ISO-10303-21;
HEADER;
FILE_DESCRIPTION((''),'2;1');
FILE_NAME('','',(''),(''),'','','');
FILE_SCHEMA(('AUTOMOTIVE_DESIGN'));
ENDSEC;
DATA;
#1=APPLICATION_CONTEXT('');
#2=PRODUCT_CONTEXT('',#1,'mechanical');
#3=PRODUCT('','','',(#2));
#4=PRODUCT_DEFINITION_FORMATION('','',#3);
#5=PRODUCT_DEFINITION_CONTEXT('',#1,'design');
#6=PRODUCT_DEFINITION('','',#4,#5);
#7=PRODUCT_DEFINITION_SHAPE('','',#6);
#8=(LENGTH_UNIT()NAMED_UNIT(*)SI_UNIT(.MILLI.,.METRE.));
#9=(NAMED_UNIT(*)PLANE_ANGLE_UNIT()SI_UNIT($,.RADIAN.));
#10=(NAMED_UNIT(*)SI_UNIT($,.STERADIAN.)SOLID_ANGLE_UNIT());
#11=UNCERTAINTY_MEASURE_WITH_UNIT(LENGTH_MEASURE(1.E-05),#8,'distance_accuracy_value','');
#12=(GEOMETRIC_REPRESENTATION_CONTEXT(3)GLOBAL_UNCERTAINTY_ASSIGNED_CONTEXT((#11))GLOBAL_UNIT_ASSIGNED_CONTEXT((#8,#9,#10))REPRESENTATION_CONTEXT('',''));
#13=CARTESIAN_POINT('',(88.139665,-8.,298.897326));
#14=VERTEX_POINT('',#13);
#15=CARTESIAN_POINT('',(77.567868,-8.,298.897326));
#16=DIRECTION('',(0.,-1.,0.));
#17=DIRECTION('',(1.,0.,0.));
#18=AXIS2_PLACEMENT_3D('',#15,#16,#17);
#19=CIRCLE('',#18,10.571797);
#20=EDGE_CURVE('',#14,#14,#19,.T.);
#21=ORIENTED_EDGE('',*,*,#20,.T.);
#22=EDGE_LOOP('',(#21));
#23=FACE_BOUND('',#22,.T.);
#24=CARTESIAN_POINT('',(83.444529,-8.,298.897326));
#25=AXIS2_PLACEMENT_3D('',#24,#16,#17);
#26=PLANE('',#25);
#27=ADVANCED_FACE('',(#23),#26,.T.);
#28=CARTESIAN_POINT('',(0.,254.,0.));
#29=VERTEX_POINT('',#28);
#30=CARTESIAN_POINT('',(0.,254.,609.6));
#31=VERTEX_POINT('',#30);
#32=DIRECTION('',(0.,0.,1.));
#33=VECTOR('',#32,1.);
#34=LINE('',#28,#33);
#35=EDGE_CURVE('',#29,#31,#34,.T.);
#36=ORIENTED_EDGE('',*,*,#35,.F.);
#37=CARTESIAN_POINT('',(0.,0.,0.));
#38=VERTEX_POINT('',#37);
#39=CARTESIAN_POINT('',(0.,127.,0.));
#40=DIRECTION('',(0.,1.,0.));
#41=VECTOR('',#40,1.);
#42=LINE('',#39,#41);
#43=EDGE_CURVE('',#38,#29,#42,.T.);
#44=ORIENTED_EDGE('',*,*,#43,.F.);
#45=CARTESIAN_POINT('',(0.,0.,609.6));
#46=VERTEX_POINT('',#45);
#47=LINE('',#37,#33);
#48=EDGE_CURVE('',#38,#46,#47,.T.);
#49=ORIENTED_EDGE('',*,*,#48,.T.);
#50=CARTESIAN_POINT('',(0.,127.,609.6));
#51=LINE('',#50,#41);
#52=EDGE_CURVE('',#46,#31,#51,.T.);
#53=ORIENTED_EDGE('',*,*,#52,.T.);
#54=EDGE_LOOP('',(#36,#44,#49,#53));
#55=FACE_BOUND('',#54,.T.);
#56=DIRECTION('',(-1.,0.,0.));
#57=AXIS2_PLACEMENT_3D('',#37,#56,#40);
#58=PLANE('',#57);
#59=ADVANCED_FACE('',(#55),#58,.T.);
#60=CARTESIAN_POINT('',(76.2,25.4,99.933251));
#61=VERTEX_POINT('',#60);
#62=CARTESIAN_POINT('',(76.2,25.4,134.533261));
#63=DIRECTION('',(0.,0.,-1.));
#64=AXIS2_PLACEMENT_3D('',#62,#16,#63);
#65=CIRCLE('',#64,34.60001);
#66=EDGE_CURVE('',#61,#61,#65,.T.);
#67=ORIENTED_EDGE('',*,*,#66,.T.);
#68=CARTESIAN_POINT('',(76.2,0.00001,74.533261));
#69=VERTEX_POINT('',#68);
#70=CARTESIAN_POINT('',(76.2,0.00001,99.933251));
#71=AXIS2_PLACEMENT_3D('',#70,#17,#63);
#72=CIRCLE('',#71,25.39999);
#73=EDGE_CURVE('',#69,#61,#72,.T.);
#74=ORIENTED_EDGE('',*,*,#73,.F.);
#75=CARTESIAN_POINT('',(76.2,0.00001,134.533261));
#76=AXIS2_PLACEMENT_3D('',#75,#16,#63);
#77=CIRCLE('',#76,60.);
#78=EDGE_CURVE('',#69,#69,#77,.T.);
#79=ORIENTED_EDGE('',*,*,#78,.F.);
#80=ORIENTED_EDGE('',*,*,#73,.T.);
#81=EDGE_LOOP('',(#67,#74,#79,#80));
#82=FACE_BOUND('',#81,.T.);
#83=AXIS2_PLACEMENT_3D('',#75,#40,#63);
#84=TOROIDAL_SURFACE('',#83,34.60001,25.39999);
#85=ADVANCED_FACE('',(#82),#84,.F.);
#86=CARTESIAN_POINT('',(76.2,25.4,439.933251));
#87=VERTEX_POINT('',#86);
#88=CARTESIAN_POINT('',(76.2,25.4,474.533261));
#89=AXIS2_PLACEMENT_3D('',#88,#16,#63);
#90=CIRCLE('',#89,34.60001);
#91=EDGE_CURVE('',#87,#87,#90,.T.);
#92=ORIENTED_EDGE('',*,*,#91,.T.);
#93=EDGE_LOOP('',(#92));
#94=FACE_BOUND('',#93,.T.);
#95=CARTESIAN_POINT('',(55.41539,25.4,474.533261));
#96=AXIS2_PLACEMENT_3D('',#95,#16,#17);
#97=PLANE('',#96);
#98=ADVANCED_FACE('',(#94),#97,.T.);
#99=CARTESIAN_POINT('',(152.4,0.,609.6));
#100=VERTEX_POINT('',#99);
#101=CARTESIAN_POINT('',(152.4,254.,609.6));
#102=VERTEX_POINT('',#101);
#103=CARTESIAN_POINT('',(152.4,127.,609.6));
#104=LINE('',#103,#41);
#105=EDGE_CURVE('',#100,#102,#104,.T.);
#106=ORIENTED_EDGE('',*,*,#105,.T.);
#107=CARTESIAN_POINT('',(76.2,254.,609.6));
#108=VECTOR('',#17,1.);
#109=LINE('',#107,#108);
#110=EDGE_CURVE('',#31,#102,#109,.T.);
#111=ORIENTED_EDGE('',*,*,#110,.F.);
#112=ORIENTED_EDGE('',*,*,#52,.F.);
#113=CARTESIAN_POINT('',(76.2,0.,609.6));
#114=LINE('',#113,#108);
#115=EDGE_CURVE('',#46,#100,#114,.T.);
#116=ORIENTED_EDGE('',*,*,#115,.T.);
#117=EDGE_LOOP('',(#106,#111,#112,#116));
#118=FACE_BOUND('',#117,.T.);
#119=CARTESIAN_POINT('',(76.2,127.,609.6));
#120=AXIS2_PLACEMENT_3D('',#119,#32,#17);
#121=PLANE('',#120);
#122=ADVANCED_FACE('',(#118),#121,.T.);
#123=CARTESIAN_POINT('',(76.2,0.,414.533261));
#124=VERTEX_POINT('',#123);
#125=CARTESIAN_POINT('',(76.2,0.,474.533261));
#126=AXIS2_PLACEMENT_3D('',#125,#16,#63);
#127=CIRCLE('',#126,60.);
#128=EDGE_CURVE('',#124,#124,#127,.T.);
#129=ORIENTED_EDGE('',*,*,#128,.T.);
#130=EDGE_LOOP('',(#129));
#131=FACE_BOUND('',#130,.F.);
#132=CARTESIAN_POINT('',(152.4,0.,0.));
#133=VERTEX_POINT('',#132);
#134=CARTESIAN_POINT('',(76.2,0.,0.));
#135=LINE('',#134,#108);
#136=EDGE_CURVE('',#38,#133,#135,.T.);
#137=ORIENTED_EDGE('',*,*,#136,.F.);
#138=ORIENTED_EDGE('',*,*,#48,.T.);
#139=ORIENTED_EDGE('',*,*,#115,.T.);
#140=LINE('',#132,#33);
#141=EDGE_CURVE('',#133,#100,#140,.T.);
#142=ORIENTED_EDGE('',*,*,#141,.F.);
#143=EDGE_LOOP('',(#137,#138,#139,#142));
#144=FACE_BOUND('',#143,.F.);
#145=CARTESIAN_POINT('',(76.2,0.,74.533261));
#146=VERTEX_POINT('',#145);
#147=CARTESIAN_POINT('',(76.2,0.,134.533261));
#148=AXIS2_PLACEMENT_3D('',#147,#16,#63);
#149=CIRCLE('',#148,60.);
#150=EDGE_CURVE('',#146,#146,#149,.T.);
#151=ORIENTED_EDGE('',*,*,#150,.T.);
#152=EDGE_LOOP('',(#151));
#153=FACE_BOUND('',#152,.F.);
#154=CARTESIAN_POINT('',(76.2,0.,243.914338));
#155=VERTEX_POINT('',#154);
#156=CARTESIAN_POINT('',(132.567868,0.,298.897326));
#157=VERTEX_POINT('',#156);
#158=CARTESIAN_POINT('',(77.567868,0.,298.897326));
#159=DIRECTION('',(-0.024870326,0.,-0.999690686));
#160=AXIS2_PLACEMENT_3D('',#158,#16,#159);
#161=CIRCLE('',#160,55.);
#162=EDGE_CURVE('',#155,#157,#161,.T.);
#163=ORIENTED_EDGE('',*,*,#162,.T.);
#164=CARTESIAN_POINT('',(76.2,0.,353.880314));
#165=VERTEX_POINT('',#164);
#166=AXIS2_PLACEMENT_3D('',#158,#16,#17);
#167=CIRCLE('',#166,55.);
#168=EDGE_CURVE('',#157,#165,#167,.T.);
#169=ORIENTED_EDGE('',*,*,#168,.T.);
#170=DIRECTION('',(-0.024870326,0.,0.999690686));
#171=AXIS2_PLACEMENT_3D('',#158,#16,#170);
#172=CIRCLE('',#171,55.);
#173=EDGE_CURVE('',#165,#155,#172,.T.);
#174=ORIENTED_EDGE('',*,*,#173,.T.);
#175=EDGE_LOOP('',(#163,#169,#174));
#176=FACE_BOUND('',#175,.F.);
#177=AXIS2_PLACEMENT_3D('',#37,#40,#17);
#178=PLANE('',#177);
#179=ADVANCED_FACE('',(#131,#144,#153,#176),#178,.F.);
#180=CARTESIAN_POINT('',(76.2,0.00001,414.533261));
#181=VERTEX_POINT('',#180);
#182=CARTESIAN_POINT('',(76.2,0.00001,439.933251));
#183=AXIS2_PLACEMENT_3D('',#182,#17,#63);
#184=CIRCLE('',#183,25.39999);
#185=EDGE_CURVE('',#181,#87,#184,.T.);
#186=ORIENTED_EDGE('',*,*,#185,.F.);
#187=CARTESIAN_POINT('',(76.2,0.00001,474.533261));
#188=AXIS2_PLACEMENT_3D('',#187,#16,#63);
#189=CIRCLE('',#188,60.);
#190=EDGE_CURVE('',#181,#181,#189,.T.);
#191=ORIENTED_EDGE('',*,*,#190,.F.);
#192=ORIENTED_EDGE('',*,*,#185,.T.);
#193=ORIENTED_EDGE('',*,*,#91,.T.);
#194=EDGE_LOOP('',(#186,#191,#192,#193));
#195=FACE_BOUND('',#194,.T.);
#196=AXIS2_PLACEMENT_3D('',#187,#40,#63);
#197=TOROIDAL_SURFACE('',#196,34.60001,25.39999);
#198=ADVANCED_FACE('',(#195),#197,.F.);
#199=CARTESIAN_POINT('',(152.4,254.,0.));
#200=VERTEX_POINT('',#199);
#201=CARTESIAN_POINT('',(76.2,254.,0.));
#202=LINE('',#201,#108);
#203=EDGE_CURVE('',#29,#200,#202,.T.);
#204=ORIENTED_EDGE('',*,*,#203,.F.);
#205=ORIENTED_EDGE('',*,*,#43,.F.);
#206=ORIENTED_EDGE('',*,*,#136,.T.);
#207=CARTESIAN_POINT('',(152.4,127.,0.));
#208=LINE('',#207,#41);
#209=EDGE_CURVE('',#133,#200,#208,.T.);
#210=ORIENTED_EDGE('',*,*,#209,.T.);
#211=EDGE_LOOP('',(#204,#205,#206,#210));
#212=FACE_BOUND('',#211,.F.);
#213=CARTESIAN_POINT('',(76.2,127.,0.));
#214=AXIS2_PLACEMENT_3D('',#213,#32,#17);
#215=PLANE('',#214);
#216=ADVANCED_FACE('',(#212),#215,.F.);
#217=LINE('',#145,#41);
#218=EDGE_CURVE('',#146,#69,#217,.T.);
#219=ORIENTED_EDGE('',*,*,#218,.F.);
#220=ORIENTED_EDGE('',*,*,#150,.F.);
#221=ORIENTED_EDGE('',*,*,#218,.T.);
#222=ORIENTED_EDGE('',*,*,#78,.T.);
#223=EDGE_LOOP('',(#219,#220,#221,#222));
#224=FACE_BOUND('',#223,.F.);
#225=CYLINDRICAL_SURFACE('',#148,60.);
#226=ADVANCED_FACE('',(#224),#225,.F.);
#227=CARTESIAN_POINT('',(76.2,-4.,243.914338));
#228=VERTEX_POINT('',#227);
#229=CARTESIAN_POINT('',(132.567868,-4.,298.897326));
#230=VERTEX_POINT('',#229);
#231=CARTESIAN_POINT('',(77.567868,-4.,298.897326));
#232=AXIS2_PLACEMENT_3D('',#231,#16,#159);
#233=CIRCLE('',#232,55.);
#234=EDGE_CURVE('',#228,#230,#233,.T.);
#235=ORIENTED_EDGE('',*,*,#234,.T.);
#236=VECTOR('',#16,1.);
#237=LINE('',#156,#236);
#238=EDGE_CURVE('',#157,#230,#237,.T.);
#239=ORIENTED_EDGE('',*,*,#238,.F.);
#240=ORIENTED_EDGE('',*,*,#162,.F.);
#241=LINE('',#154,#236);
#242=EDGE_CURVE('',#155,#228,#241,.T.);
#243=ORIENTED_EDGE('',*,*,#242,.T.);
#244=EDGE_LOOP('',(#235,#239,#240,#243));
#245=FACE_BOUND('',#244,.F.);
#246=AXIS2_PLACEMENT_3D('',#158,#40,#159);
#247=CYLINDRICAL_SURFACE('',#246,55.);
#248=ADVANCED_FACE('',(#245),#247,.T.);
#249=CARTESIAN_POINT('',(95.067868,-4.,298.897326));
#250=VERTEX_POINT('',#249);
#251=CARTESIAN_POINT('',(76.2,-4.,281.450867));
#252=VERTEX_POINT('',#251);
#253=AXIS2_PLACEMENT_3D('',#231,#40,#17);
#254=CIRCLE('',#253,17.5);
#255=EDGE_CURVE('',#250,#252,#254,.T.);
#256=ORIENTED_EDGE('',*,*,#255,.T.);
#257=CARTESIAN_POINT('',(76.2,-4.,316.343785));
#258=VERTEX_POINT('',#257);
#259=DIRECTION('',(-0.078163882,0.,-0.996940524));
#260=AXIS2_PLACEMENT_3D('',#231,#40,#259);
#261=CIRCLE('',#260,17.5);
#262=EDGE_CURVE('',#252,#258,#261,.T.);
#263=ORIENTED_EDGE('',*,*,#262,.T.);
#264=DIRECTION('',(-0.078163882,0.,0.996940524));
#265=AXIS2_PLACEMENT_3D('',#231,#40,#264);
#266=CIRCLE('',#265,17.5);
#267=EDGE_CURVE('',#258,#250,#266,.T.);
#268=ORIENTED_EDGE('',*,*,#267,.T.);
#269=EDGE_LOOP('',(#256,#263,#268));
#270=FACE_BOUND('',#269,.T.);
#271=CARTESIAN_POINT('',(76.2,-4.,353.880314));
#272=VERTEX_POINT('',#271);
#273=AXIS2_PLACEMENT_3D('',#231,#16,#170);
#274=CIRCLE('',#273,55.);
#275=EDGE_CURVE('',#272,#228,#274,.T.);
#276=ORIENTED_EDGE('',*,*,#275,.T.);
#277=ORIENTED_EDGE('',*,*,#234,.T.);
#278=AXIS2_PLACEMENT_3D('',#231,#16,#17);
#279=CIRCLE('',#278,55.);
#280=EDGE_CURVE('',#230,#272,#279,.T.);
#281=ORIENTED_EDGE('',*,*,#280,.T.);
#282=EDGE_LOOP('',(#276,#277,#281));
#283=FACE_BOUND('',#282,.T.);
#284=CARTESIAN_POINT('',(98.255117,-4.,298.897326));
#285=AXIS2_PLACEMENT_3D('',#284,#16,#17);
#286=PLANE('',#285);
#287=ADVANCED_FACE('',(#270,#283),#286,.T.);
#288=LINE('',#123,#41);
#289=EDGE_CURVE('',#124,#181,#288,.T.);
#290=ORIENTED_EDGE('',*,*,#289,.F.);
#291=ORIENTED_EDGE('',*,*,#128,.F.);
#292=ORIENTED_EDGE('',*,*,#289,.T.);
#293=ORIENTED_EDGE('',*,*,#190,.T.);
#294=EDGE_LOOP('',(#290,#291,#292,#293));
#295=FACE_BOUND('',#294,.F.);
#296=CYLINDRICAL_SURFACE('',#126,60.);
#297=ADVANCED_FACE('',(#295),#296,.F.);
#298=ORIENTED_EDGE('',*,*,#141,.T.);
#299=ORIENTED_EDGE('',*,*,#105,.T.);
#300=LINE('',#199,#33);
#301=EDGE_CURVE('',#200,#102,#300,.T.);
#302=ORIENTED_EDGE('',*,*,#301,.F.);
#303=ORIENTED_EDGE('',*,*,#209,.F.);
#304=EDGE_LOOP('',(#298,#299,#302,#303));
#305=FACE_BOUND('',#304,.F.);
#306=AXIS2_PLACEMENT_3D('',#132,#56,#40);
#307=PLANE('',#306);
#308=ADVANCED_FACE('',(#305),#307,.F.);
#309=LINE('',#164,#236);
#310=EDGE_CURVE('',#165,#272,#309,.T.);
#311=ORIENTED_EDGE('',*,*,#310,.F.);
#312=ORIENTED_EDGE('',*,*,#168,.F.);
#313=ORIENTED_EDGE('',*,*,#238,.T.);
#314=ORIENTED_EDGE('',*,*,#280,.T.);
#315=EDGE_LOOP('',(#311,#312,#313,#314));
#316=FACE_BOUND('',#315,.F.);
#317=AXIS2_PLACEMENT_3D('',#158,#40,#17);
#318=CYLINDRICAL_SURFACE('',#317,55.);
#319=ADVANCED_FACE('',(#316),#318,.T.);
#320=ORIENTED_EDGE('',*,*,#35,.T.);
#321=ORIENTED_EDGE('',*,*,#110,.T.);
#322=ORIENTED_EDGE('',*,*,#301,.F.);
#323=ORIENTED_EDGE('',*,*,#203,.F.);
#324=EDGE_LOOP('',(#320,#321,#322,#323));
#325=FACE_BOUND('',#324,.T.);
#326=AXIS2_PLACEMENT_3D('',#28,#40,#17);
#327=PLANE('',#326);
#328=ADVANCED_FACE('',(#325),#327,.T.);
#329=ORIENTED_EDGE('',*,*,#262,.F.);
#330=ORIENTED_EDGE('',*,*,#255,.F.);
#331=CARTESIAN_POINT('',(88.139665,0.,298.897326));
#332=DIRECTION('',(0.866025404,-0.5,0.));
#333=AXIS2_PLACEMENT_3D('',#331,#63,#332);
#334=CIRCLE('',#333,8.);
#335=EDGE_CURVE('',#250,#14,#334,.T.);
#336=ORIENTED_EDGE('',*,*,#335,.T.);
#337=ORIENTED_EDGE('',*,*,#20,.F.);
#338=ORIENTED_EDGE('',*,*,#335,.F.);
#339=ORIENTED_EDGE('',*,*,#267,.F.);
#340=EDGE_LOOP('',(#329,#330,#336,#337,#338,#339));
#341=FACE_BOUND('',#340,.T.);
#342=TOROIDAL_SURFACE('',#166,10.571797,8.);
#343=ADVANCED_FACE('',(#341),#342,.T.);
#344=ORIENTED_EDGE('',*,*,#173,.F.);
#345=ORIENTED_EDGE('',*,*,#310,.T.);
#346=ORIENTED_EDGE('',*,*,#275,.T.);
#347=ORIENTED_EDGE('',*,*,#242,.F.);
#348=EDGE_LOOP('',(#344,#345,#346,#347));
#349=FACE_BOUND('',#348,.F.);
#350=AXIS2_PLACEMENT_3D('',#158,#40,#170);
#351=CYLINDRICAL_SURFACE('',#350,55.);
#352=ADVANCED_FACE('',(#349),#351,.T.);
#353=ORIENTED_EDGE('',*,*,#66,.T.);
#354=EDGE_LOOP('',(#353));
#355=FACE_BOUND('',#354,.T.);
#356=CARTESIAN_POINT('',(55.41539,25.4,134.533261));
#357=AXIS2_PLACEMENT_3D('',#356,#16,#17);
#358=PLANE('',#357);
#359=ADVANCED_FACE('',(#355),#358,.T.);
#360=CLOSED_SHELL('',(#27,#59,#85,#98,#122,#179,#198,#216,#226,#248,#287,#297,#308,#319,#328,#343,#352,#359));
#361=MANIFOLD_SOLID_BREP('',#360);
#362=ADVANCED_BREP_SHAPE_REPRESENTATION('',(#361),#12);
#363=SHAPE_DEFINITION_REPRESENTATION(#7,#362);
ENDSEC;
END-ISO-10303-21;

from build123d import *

# Parameters (mm, degrees)
F0_W     = 152.4
F0_H     = 254
F1_DEPTH = 609.6
F3_DEPTH = 25.4
F4_R     = 25.39999
F5_DEPTH = 4
F6_DEPTH = 8


# Not quite as in the source:
# - a fillet or chamfer that OpenCascade refuses, or shapes differently, is made with other operations: its cross-section is extruded or revolved along the edge and cut away or added
# - a fillet or chamfer is up to 0.001 mm smaller than in the source, because OpenCascade refuses the exact size


with BuildPart() as f1:
    # F0 (on Top) → F1 (new body)
    with BuildSketch(Plane.XY):
        with Locations((76.2, 127)):
            Rectangle(F0_W, F0_H)
    extrude(amount=F1_DEPTH)

    # F2 (on face) → F3 (cut)
    with BuildSketch(Plane.XZ):
        with BuildLine():
            Line((76.2, 414.5332613452), (76.2, 534.5332613452))
            ThreePointArc((76.2, 534.5332613452), (16.2, 474.5332613452), (76.2, 414.5332613452))
        make_face()
        with BuildLine():
            ThreePointArc((76.2, 414.5332613452), (118.6264068712, 432.106854474), (136.2, 474.5332613452))
            ThreePointArc((136.2, 474.5332613452), (118.6264068712, 516.9596682164), (76.2, 534.5332613452))
            Line((76.2, 534.5332613452), (76.2, 414.5332613452))
        make_face()
        with BuildLine():
            Line((76.2, 74.5332613452), (76.2, 194.5332613452))
            ThreePointArc((76.2, 194.5332613452), (16.2, 134.5332613452), (76.2, 74.5332613452))
        make_face()
        with BuildLine():
            ThreePointArc((136.2, 134.5332613452), (118.6264068712, 176.9596682164), (76.2, 194.5332613452))
            Line((76.2, 194.5332613452), (76.2, 74.5332613452))
            ThreePointArc((76.2, 74.5332613452), (118.6264068712, 92.106854474), (136.2, 134.5332613452))
        make_face()
    extrude(amount=-F3_DEPTH, mode=Mode.SUBTRACT)

    # F4 (radius 25.4 in the source; OpenCascade refuses exactly that, so slightly less here)
    f4_edges = [f1.edges().sort_by_distance(p)[0] for p in [
        (76.2, 25.4, 534.533261),
        (76.2, 25.4, 194.533261),
    ]]
    fillet(f4_edges, radius=F4_R)

    # F2 (on face) → F5 (join)
    with BuildSketch(Plane.XZ):
        with BuildLine():
            ThreePointArc((132.5678679347, 298.8973259926), (115.9720816592, 338.2688432126), (76.2, 353.8803137007))
            Line((76.2, 353.8803137007), (76.2, 316.3437851552))
            ThreePointArc((76.2, 316.3437851552), (89.4487835379, 311.7462109414), (95.0678679347, 298.8973259926))
            ThreePointArc((95.0678679347, 298.8973259926), (89.4487835379, 286.0484410437), (76.2, 281.45086683))
            Line((76.2, 281.45086683), (76.2, 243.9143382844))
            ThreePointArc((76.2, 243.9143382844), (115.9720816592, 259.5258087726), (132.5678679347, 298.8973259926))
        make_face()
        with BuildLine():
            Line((76.2, 316.3437851552), (76.2, 353.8803137007))
            ThreePointArc((76.2, 353.8803137007), (22.5678679347, 298.8973259926), (76.2, 243.9143382844))
            Line((76.2, 243.9143382844), (76.2, 281.45086683))
            ThreePointArc((76.2, 281.45086683), (60.0678679347, 298.8973259926), (76.2, 316.3437851552))
        make_face()
    extrude(amount=F5_DEPTH)

    # F2 (on face) → F6 (join)
    with BuildSketch(Plane.XZ):
        with BuildLine():
            ThreePointArc((95.0678679347, 298.8973259926), (89.4487835379, 311.7462109414), (76.2, 316.3437851552))
            Line((76.2, 316.3437851552), (76.2, 281.45086683))
            ThreePointArc((76.2, 281.45086683), (89.4487835379, 286.0484410437), (95.0678679347, 298.8973259926))
        make_face()
        with BuildLine():
            Line((76.2, 281.45086683), (76.2, 316.3437851552))
            ThreePointArc((76.2, 316.3437851552), (60.0678679347, 298.8973259926), (76.2, 281.45086683))
        make_face()
    extrude(amount=F6_DEPTH)

    # F7: fillet of radius 8 on 1 edges, made by hand

    # F7_s1 → F7_t2 (revolve, cut)
    with BuildSketch(Plane.XY.offset(298.8973259926)):
        with BuildLine():
            ThreePointArc((95.0678679347, -4), (92.1396647044, -6.9282032303), (88.1396647044, -8))
            Line((88.1396647044, -8), (95.0678679347, -8))
            Line((95.0678679347, -8), (95.0678679347, -4))
        make_face()
    revolve(axis=Axis((77.5678679347, -8, 298.8973259926), (0, -1, 0)), mode=Mode.SUBTRACT)


solid = f1.part
